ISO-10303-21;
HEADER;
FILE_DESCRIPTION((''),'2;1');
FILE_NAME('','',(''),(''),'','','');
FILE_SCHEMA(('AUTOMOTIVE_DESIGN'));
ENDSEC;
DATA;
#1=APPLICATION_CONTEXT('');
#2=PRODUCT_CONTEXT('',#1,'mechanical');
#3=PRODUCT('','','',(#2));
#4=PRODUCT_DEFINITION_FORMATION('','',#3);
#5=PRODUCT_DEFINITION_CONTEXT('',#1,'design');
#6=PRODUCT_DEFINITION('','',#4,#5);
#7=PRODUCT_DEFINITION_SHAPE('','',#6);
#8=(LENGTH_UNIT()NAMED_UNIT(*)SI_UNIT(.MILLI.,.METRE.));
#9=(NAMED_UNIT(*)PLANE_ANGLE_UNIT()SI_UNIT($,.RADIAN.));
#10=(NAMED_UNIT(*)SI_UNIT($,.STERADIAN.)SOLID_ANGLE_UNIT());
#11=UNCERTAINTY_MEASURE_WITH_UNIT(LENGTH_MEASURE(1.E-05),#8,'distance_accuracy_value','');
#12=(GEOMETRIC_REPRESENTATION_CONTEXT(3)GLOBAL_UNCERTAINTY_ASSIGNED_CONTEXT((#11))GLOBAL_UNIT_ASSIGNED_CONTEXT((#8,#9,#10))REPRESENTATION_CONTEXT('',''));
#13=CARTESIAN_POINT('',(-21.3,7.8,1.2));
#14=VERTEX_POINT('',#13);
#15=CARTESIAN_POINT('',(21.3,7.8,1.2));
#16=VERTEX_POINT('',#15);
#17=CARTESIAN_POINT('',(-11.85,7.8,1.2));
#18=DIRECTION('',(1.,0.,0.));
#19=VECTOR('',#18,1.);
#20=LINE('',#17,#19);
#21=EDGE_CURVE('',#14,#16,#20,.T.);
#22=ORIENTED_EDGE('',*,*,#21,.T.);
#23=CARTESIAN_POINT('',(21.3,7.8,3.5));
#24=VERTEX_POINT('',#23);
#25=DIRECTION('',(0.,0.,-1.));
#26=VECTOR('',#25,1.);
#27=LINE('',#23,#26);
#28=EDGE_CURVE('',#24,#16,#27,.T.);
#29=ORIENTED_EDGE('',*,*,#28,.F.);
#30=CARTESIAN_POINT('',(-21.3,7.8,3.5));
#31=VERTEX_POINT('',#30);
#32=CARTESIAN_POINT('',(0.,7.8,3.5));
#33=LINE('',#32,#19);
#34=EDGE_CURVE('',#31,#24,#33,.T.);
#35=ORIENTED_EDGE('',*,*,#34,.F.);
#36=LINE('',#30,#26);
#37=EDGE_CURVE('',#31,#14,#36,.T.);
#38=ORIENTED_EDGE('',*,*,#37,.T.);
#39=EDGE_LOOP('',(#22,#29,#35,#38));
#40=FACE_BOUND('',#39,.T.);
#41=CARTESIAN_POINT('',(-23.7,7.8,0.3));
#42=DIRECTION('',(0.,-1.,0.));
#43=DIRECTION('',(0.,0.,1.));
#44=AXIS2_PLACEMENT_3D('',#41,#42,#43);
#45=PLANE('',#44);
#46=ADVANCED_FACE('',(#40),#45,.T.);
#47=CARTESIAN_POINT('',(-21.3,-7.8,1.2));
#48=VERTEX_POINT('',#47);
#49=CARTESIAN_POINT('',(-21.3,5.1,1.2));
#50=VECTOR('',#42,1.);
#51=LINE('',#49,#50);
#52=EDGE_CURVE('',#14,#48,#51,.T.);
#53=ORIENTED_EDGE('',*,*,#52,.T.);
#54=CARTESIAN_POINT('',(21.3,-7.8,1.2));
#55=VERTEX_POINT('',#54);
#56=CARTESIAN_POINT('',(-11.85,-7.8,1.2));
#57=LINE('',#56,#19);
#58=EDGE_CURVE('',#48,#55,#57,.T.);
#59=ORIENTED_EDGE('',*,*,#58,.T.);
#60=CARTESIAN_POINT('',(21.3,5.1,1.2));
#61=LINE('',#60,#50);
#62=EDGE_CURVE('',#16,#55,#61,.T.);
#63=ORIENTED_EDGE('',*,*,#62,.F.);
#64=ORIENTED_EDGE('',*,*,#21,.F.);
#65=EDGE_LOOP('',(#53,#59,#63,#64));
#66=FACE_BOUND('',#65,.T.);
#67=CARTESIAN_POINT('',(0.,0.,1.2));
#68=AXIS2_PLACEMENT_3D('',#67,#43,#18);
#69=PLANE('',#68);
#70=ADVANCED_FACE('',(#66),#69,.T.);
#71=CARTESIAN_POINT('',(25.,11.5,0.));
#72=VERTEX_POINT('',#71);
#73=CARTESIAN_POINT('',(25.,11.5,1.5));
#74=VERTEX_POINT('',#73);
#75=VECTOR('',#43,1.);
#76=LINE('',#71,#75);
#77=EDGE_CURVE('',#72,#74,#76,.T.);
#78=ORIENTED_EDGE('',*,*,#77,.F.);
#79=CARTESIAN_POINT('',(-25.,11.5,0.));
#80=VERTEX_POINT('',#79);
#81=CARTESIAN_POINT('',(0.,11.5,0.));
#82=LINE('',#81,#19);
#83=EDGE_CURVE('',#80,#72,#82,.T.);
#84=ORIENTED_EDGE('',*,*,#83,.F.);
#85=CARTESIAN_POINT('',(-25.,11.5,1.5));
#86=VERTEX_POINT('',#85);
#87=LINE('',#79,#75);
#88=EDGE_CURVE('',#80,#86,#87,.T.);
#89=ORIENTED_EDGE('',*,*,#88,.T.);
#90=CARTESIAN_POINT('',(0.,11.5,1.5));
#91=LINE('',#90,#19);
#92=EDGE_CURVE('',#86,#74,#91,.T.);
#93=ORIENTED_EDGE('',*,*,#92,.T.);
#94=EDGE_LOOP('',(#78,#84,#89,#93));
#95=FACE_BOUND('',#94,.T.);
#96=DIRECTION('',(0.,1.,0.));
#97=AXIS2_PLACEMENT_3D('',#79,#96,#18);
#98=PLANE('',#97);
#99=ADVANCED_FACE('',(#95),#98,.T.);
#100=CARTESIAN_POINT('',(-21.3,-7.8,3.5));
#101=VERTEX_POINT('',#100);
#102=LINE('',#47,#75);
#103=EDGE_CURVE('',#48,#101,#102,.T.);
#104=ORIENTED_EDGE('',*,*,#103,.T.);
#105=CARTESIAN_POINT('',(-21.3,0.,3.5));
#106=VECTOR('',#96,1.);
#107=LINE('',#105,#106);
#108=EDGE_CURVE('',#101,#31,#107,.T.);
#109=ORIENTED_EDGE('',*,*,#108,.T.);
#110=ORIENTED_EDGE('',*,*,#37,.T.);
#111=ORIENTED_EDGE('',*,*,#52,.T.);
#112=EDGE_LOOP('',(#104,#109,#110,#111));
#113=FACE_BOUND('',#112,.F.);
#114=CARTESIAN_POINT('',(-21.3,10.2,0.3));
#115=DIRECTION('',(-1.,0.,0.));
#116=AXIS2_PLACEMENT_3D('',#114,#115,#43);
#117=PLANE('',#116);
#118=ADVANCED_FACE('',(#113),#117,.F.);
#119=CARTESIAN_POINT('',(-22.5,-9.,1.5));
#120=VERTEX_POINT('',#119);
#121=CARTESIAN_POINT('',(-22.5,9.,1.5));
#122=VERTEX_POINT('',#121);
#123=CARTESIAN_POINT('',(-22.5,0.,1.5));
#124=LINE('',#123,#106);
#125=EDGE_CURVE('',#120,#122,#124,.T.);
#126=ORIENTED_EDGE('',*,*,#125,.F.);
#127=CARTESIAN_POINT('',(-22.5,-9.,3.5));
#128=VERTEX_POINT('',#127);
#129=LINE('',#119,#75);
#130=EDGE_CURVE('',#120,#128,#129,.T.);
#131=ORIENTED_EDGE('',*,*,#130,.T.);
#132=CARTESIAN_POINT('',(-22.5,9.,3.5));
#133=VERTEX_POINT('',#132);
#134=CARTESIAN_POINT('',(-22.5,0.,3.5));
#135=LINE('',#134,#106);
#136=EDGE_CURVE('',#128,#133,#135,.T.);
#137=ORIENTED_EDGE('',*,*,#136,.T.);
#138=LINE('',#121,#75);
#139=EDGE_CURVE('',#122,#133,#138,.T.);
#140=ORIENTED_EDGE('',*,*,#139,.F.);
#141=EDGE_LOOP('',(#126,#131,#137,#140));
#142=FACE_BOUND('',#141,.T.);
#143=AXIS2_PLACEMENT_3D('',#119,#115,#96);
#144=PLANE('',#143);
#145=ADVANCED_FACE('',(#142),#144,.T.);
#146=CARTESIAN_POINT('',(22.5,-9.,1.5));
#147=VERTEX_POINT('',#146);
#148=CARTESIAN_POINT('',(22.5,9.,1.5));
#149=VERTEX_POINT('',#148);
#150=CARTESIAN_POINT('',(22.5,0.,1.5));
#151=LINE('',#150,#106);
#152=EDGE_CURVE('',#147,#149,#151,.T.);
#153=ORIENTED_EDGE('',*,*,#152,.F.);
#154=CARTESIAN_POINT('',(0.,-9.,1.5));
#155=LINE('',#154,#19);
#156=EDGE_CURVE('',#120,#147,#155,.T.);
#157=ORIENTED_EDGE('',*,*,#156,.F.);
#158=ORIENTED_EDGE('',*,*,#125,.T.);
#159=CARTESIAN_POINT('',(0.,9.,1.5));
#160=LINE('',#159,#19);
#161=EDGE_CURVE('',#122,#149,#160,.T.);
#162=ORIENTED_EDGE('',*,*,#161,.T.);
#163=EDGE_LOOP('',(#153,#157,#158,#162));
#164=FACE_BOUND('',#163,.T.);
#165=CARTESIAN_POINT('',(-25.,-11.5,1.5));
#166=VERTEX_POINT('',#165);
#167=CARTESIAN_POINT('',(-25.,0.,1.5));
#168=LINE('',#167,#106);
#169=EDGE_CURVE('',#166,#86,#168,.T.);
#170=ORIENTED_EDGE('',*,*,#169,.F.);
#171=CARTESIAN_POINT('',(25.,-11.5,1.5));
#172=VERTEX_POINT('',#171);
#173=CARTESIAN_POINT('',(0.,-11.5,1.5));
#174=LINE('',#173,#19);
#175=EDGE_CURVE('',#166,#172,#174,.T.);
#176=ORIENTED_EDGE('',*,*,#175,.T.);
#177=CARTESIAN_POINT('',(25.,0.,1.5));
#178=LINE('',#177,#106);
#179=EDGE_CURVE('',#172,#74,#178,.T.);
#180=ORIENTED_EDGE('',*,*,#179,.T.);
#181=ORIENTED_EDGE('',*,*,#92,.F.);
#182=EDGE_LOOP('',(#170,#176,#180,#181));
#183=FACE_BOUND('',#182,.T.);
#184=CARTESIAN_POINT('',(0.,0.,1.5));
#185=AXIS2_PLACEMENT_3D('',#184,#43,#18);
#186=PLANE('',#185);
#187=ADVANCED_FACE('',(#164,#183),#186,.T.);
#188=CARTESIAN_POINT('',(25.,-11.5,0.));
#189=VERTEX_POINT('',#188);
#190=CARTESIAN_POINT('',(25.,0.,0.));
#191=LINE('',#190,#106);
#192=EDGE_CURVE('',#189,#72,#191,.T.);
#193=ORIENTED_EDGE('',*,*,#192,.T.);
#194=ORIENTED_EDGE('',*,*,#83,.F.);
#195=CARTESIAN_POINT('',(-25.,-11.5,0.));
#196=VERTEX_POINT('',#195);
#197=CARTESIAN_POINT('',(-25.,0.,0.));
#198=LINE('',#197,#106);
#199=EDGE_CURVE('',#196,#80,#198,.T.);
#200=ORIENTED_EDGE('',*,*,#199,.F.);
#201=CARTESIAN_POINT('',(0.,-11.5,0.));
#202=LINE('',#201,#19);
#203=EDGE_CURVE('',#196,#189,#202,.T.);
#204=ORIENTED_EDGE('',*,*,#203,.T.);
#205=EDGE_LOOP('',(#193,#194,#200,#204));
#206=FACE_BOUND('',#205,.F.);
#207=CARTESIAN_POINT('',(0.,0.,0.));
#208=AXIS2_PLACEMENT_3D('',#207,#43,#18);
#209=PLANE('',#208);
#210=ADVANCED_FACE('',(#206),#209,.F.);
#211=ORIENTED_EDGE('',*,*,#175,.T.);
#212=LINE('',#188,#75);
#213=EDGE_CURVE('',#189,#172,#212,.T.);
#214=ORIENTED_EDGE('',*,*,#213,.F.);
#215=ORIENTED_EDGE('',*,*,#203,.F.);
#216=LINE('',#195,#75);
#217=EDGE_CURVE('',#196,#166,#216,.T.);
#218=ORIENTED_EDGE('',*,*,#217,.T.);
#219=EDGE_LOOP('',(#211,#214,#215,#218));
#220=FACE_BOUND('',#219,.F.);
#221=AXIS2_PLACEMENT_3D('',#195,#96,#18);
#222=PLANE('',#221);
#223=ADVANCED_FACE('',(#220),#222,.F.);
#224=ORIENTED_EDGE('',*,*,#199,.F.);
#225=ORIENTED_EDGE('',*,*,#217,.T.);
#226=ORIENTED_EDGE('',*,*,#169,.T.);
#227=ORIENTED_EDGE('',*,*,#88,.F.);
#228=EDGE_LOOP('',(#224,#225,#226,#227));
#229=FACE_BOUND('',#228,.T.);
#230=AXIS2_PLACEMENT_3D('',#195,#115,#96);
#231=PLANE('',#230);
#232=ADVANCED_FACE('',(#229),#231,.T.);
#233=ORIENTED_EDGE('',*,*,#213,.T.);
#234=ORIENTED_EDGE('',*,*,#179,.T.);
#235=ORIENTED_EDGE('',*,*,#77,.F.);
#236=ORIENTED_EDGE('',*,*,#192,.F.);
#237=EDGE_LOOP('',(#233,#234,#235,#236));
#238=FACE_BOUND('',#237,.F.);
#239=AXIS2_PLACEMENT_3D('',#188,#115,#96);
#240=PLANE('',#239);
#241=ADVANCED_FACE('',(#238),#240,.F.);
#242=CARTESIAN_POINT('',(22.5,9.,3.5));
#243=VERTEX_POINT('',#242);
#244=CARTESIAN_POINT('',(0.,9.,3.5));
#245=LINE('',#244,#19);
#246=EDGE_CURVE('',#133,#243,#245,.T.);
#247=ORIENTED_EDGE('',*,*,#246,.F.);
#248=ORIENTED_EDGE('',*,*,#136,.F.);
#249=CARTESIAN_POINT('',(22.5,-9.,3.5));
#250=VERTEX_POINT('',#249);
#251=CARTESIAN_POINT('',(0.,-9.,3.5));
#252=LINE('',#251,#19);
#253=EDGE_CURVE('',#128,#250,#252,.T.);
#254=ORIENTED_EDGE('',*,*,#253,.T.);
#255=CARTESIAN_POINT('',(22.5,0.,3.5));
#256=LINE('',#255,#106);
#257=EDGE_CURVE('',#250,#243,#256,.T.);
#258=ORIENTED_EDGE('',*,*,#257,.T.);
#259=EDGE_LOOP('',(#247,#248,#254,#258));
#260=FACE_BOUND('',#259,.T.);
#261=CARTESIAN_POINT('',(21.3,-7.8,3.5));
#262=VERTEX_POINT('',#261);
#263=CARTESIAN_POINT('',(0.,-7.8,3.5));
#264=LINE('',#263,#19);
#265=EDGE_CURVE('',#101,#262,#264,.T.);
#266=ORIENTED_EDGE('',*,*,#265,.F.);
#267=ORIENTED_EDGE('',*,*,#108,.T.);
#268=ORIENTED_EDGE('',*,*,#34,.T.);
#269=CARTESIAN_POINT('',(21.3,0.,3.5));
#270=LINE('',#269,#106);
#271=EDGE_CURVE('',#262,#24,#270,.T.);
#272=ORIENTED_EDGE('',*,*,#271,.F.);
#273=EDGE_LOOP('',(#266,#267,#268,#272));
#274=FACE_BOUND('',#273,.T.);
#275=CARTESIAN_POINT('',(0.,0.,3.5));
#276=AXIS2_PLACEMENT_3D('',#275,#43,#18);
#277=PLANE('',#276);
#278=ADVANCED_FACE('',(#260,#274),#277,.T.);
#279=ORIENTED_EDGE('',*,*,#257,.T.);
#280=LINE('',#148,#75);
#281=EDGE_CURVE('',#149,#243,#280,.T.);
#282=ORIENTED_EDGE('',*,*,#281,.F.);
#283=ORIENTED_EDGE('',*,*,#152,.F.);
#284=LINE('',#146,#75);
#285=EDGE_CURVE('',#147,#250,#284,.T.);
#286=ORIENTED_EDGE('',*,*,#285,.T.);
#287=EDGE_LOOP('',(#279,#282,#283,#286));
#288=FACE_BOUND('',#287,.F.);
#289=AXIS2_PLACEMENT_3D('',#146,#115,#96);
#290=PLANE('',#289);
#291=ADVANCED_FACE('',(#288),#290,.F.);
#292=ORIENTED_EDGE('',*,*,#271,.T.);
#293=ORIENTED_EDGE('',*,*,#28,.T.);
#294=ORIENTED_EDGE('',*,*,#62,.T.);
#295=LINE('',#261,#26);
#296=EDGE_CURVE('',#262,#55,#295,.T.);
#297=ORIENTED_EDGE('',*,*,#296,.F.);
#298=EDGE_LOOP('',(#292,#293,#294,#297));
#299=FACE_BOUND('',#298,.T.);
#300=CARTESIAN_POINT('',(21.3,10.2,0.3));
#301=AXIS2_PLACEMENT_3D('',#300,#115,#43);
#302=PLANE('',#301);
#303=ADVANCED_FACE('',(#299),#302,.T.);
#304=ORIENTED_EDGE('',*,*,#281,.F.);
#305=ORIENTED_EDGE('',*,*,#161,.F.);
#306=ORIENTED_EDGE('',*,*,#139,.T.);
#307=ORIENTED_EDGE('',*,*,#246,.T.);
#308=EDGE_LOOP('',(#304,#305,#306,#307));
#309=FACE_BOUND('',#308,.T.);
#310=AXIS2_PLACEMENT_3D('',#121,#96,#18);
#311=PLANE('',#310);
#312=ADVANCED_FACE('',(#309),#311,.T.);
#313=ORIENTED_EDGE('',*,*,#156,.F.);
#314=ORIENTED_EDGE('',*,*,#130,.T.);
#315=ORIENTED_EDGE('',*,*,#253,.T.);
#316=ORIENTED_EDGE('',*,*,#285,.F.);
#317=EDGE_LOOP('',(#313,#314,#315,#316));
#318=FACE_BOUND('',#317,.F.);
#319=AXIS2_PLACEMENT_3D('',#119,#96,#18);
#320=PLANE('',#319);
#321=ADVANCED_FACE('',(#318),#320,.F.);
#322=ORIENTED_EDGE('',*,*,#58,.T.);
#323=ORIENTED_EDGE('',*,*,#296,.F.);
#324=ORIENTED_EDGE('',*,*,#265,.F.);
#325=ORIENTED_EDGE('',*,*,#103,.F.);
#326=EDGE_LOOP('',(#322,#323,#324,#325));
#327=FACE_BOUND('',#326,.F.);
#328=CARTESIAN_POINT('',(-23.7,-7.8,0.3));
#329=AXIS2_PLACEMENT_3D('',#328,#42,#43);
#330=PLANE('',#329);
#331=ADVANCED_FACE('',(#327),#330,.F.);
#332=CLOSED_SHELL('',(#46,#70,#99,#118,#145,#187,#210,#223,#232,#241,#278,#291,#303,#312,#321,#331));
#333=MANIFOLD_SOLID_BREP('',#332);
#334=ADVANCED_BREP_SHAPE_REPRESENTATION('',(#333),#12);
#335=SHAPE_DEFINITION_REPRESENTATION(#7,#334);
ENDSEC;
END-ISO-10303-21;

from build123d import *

# Parameters (mm, degrees)
F0_W        = 50
F0_H        = 23
F1_DEPTH    = 1.5
F2_W        = 45
F2_H        = 18
F3_DEPTH    = 2
F4_T        = 1.2
F4_T3_DEPTH = 47.4
F4_T5_DEPTH = 20.4


# Not quite as in the source:
# - a shell that OpenCascade refuses in one call is made with other operations: the cavity is built on its own and cut out


with BuildPart() as f1:
    # F0 (on Top) → F1 (new body)
    with BuildSketch(Plane.XY):
        Rectangle(F0_W, F0_H)
    extrude(amount=F1_DEPTH)

    # F2 (on face) → F3 (join)
    with BuildSketch(Plane.XY.offset(1.5)):
        Rectangle(F2_W, F2_H)
    extrude(amount=F3_DEPTH)

    # F4: shell of thickness 1.2, made by hand


with BuildPart() as f4_core1:
    # F4_t2: copy of F1
    add(f1.part)

    # the walls: a layer under each face that stays
    f4_faces = [f4_core1.faces().sort_by_distance(p)[0] for p in [
        (0, 11.5, 0.75),
        (25, 0, 0.75),
        (-25, 0, 0.75),
        (0, 0, 0),
        (-21.4285714286, -9.8571428571, 1.5),
        (0, -11.5, 0.75),
        (0, 9, 2.5),
        (-22.5, 0, 2.5),
        (0, -9, 2.5),
        (22.5, 0, 2.5),
    ]]
    thicken(f4_faces, amount=-F4_T, mode=Mode.SUBTRACT)

    # F4_s4 → F4_t3 (cut)
    with BuildSketch(Plane.YZ.offset(-23.7)):
        Polygon((9.012, 1.512), (9, 0.3), (7.8, 0.3), (7.8, 1.5), align=None)
        Polygon((-9.012, 1.512), (-9, 0.3), (-7.8, 0.3), (-7.8, 1.5), align=None)
    extrude(amount=F4_T3_DEPTH, mode=Mode.SUBTRACT)

    # F4_s6 → F4_t5 (cut)
    with BuildSketch(Plane.XZ.offset(-10.2)):
        Polygon((-22.512, 1.512), (-22.5, 0.3), (-21.3, 0.3), (-21.3, 1.5), align=None)
        Polygon((22.512, 1.512), (22.5, 0.3), (21.3, 0.3), (21.3, 1.5), align=None)
    extrude(amount=F4_T5_DEPTH, mode=Mode.SUBTRACT)


with BuildPart() as f1_1:
    add(f1.part)

    # what is left inside the walls is the cavity
    f4_cavity = [f4_core1.part.solids().sort_by_distance(p)[0] for p in [
        (0, -2.6, 3.488),
    ]]
    add(f4_cavity, mode=Mode.SUBTRACT)


solid = f1_1.part
